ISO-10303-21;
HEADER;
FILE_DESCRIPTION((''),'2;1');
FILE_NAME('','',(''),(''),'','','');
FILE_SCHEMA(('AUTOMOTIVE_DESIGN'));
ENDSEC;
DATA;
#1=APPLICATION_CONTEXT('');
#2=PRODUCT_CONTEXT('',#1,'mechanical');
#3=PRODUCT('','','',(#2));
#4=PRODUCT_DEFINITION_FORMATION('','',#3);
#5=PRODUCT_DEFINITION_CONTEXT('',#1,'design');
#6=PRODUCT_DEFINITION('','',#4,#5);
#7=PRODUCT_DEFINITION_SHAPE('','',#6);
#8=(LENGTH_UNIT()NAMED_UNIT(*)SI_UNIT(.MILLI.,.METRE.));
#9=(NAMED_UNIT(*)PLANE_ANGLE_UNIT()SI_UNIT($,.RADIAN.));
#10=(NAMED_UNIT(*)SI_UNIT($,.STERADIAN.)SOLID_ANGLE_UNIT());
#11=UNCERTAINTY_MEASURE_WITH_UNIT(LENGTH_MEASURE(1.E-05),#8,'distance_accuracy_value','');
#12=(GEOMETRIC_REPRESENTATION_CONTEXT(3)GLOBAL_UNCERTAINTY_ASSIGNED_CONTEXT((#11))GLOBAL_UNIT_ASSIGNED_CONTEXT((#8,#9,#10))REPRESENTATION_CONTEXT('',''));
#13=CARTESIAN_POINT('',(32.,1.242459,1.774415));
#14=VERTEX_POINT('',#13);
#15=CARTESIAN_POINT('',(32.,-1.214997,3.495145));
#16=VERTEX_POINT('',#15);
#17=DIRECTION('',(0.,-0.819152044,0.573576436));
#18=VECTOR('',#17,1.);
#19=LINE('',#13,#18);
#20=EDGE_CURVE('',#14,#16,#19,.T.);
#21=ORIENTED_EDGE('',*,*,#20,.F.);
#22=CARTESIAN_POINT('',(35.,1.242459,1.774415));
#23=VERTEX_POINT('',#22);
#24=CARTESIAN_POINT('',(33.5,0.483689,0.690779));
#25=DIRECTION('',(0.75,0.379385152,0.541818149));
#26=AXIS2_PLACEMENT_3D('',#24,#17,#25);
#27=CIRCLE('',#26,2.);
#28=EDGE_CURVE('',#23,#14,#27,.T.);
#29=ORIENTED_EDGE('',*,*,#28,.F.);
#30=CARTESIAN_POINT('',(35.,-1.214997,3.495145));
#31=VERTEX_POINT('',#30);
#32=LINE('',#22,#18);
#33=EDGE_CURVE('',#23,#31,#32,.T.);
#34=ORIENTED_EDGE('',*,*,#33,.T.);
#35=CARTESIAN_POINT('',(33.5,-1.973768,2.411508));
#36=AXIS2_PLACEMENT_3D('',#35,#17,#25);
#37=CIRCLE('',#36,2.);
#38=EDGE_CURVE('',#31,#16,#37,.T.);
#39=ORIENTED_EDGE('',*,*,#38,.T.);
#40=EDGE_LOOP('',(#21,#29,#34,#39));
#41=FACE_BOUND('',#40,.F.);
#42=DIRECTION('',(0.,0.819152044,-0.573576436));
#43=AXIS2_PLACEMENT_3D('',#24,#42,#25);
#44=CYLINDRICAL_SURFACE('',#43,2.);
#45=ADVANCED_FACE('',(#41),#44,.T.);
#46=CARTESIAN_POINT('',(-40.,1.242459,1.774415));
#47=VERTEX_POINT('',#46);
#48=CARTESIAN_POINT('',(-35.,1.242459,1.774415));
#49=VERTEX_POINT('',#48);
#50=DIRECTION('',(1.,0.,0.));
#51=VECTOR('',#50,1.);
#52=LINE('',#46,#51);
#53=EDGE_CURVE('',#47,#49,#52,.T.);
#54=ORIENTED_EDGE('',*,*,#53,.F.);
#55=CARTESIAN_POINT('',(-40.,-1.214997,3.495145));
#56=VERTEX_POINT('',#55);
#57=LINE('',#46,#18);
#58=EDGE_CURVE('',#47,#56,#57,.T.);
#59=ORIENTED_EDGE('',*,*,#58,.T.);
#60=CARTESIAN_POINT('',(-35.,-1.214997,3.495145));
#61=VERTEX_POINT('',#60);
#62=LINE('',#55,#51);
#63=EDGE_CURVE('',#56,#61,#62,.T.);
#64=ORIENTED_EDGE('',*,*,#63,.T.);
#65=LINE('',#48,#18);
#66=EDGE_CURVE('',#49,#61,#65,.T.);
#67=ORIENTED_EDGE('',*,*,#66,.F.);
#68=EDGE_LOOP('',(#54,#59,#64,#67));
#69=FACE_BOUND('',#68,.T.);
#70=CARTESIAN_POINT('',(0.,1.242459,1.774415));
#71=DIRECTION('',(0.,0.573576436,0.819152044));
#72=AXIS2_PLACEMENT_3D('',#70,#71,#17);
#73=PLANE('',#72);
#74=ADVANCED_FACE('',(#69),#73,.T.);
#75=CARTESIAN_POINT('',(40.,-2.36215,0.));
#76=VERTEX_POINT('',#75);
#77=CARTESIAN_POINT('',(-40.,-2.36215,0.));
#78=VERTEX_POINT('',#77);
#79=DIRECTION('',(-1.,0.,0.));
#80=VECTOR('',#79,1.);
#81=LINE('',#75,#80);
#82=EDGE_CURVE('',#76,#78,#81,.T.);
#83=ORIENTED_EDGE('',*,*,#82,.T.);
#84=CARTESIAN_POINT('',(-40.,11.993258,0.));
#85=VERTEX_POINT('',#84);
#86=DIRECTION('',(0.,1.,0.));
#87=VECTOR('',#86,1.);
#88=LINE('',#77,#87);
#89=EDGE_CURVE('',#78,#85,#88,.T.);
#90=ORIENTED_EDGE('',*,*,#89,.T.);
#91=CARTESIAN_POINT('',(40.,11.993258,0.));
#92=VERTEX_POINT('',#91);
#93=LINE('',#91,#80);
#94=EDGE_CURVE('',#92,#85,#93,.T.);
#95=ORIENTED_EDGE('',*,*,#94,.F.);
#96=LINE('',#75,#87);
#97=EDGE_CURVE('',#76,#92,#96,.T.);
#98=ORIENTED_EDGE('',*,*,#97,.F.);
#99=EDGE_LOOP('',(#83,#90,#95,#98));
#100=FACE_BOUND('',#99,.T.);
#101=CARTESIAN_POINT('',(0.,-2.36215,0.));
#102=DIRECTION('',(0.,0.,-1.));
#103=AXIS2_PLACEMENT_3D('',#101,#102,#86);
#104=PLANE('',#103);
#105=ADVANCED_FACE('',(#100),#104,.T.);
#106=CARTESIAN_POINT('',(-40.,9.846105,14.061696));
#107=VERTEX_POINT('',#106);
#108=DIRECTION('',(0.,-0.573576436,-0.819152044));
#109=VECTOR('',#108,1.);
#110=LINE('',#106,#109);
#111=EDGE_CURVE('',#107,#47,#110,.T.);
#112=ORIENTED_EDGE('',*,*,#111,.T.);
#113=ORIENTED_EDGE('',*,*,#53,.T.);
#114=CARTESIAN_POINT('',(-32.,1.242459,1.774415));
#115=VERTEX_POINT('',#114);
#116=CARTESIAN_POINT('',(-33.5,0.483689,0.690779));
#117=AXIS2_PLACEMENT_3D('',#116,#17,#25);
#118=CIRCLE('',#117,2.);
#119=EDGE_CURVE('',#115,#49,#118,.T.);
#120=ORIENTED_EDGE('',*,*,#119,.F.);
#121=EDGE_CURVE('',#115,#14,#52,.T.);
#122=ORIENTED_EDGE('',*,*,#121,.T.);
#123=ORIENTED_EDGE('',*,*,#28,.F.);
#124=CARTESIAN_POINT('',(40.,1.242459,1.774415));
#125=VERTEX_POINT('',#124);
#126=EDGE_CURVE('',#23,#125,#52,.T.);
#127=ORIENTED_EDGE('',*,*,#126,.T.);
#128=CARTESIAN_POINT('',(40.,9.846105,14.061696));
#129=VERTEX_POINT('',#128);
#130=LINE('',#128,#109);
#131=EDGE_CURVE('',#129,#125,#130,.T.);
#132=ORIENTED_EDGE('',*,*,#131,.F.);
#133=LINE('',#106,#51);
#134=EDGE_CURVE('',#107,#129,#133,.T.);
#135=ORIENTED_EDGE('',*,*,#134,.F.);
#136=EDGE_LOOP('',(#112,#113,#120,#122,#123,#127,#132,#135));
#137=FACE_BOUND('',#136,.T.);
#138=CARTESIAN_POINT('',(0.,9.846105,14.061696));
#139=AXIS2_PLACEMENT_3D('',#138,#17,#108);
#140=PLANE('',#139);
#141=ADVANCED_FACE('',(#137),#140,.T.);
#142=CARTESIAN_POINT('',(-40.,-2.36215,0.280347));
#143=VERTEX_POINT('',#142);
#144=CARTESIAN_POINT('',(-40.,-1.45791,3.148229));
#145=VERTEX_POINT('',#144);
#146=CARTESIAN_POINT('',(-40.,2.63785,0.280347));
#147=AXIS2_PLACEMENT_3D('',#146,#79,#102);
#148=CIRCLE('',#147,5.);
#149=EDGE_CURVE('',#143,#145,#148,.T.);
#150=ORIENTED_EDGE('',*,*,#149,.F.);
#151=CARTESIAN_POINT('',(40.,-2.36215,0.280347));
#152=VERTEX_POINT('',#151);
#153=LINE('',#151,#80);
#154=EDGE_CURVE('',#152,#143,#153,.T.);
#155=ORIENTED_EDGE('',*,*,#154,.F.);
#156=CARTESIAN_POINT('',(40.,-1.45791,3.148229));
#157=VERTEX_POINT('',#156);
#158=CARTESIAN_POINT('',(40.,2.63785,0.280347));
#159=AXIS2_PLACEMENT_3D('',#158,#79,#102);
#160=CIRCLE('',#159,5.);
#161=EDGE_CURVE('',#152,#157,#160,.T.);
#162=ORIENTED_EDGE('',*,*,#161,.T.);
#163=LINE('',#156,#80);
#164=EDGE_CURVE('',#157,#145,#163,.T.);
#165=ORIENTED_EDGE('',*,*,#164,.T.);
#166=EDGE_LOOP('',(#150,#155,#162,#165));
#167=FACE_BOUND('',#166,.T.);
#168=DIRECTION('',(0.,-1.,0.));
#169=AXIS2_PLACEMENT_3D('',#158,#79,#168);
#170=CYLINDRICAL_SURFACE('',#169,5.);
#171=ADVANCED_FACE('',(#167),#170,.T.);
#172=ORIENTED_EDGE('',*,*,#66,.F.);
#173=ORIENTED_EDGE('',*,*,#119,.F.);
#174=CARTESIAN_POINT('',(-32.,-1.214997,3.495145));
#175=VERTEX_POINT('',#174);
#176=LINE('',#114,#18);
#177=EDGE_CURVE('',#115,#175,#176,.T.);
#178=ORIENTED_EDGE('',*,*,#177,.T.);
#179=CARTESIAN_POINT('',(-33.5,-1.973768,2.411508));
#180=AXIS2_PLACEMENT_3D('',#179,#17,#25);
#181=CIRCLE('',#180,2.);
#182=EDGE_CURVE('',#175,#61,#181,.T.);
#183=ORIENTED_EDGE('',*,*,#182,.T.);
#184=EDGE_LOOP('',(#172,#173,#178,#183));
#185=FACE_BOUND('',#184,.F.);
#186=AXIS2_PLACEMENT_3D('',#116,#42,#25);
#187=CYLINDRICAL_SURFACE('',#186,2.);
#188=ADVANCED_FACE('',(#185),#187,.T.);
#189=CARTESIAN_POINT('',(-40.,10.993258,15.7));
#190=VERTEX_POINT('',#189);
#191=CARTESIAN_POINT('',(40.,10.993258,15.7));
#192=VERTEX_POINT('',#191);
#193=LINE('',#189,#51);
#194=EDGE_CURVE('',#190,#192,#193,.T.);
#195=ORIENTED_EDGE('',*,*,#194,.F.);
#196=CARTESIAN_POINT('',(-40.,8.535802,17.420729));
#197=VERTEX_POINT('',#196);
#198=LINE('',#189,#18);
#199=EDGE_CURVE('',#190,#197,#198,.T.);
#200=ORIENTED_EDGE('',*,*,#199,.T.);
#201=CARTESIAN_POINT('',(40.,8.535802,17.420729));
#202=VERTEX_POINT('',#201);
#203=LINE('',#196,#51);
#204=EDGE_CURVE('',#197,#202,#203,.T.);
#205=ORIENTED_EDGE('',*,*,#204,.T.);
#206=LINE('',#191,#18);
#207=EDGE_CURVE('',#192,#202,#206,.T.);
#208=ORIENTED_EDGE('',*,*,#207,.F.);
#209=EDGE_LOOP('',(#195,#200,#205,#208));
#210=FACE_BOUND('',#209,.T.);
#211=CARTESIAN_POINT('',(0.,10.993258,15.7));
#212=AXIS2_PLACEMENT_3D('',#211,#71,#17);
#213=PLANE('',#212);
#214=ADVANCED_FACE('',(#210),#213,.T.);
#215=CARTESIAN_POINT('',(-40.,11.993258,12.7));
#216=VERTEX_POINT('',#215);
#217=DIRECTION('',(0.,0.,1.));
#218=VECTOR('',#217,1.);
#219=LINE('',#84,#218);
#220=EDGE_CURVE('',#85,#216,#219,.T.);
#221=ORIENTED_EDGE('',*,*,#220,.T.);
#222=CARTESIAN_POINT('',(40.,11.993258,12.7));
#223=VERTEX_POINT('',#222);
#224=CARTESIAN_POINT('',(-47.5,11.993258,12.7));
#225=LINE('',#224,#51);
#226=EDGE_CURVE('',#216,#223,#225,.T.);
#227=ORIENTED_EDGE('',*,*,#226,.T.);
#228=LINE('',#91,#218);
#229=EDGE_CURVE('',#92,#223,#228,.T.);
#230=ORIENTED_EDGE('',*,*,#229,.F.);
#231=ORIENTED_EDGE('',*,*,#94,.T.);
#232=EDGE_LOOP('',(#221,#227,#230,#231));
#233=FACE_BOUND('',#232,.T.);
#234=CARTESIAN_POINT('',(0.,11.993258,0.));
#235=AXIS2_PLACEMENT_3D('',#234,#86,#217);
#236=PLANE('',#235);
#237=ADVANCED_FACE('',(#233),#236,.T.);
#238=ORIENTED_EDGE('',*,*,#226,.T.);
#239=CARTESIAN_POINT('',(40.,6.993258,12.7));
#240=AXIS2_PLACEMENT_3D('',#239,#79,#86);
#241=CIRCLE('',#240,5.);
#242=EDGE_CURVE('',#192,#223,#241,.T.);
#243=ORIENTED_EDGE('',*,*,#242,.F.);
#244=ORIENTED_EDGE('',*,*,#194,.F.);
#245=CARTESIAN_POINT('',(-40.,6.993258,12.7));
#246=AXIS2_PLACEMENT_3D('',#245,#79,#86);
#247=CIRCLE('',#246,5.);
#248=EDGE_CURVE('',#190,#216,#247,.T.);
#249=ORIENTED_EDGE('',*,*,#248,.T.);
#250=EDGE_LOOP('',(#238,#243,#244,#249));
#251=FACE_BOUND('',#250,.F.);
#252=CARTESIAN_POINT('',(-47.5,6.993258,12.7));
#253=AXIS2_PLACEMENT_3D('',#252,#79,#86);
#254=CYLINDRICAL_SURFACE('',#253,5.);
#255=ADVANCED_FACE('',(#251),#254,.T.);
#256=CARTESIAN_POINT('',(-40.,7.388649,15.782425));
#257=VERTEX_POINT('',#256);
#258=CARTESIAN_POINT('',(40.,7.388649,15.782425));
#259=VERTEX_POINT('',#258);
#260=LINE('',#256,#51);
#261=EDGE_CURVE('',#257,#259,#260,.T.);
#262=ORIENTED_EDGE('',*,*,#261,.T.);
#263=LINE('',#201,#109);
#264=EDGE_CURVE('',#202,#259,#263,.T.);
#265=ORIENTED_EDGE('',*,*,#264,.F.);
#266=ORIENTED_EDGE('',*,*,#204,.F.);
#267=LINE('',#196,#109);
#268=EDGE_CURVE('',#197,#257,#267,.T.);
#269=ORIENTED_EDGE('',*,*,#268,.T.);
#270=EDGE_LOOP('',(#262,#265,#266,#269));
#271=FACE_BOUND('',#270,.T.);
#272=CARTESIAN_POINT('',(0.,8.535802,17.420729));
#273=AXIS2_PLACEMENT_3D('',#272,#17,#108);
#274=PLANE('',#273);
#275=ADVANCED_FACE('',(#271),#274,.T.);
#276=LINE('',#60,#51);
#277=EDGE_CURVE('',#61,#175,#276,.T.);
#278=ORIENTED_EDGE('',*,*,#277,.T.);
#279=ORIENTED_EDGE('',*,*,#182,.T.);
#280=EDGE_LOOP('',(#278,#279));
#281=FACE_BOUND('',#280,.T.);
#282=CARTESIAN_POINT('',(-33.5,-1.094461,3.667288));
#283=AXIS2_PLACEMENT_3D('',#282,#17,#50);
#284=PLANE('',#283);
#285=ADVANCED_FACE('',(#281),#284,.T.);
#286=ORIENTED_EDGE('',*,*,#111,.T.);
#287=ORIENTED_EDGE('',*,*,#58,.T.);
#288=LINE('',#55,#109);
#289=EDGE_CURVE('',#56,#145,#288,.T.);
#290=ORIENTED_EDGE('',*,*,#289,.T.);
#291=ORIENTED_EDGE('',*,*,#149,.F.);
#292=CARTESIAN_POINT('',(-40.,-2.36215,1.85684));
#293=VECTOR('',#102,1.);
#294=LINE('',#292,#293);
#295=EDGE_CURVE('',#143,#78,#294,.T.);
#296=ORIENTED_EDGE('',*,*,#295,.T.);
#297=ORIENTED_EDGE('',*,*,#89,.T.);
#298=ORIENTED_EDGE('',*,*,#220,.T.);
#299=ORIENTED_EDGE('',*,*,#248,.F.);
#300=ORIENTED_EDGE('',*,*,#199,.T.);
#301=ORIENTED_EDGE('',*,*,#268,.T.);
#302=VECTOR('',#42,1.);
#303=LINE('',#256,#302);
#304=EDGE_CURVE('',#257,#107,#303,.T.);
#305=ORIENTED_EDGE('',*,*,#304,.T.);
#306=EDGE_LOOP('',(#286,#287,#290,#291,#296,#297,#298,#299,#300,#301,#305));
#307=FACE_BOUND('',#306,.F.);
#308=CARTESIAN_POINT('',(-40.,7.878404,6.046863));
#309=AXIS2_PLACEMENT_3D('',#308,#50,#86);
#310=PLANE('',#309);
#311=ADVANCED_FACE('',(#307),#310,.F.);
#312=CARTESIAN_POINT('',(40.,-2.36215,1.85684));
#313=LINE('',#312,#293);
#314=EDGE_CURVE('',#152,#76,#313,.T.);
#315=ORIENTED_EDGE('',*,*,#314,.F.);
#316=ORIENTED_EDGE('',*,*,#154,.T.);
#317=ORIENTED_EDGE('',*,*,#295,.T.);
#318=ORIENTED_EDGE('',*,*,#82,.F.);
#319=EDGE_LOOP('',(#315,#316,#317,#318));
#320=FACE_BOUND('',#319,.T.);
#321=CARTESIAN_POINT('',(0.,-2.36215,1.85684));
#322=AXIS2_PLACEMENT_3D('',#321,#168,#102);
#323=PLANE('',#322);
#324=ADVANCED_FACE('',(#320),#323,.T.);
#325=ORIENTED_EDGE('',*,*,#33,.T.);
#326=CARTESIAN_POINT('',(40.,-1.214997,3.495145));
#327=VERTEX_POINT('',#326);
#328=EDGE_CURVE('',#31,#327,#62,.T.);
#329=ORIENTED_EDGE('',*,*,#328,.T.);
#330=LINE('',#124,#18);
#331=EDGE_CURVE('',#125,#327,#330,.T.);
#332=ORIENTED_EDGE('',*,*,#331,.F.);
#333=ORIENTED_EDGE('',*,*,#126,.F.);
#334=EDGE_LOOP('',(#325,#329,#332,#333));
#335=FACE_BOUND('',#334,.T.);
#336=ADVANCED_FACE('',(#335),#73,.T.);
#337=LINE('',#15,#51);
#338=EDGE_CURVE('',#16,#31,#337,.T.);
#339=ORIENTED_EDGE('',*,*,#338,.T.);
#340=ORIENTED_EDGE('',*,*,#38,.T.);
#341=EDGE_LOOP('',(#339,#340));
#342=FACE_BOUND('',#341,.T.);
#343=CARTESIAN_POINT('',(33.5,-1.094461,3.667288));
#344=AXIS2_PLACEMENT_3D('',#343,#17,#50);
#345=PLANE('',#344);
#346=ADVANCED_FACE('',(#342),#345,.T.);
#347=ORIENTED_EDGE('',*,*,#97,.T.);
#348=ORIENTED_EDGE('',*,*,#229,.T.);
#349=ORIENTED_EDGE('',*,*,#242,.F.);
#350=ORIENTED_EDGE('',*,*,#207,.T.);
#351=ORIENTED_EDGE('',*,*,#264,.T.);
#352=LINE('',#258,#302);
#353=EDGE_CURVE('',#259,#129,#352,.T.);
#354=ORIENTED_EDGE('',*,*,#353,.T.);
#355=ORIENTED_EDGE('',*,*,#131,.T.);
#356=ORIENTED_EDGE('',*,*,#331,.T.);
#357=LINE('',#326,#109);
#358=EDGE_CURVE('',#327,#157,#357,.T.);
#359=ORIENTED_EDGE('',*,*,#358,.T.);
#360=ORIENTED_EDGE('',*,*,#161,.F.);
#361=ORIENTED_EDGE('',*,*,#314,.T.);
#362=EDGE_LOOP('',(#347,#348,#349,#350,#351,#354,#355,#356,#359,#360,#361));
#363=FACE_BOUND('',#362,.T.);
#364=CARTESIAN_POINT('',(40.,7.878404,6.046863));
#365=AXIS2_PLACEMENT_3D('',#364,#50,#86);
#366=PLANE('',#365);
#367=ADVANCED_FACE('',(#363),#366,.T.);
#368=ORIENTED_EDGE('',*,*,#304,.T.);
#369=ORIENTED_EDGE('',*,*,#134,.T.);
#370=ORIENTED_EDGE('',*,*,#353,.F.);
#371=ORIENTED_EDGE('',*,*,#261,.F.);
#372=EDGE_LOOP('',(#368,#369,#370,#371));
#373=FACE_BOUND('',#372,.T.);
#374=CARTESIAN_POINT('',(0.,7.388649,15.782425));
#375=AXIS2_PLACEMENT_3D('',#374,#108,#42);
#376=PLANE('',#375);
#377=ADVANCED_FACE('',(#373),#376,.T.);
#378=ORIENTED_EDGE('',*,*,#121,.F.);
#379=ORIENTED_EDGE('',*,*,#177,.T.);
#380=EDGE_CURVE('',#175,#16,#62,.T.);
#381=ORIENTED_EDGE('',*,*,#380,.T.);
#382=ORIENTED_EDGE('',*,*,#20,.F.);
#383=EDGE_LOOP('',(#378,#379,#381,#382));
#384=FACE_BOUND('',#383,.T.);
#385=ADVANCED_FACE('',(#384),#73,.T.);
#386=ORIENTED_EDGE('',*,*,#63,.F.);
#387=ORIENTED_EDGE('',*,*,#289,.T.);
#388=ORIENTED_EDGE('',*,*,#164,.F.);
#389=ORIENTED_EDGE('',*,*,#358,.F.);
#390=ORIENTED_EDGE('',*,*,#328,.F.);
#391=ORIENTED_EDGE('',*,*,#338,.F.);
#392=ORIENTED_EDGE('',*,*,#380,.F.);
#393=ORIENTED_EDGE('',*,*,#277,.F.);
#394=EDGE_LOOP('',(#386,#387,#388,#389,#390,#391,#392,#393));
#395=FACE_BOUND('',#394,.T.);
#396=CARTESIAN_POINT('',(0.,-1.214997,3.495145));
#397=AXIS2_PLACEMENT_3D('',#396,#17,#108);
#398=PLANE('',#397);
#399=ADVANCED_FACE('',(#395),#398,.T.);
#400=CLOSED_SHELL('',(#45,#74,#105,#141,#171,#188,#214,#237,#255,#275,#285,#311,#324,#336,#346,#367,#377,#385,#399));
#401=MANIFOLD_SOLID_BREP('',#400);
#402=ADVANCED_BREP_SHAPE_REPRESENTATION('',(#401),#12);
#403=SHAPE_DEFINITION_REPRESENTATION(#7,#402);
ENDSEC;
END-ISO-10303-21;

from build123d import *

# Parameters (mm, degrees)
F1_DEPTH    = 40
F2_R        = 5
F3_T1_DEPTH = 95
F5_DEPTH    = 3


# Not quite as in the source:
# - a fillet or chamfer that OpenCascade refuses, or shapes differently, is made with other operations: its cross-section is extruded or revolved along the edge and cut away or added


with BuildPart() as f1:
    # F0 (on Right) → F1 (new body, symmetric)
    with BuildSketch(Plane.YZ):
        Polygon((0.0953060592, 0.1361111585), (0, 0), (11.9932583499, 0), (11.9932583499, 15.7), (10.9932583499, 15.7), (9.8461054772, 14.0616959114), (1.2424589319, 1.7744152471), align=None)
        Polygon((7.3886493443, 15.7824252205), (9.8461054772, 14.0616959114), (10.9932583499, 15.7), (8.535802217, 17.4207293091), align=None)
        Polygon((-2.3621500736, 1.8568404676), (0.0953060592, 0.1361111585), (1.2424589319, 1.7744152471), (-1.2149972009, 3.4951445561), align=None)
        Polygon((-2.3621500736, 0), (0, 0), (0.0953060592, 0.1361111585), (-2.3621500736, 1.8568404676), align=None)
    extrude(amount=F1_DEPTH, both=True)

    # F2
    f2_edges = [f1.edges().sort_by_distance(p)[0] for p in [
        (0, -2.36215, 1.85684),
    ]]
    fillet(f2_edges, radius=F2_R)

    # F3: fillet of radius 5 on 1 edges, made by hand

    # F3_s2 → F3_t1 (cut)
    with BuildSketch(Plane.YZ.offset(-47.5)):
        with BuildLine():
            ThreePointArc((11.9932583499, 12.7), (11.7366748401, 14.2811388301), (10.9932583499, 15.7))
            Line((10.9932583499, 15.7), (11.9932583499, 15.7))
            Line((11.9932583499, 15.7), (11.9932583499, 12.7))
        make_face()
    extrude(amount=F3_T1_DEPTH, mode=Mode.SUBTRACT)

    # F4 (on face) → F5 (join)
    with BuildSketch(Plane(origin=(0, 0, 0), x_dir=(1, 0, 0), z_dir=(0, -0.8191520443, 0.5735764364))):
        with BuildLine():
            Line((-35, 2.1661610436), (-32, 2.1661610436))
            ThreePointArc((-32, 2.1661610436), (-33.5, 2.843285388), (-35, 2.1661610436))
        make_face()
        with BuildLine():
            ThreePointArc((35, 2.1661610436), (33.5, 2.843285388), (32, 2.1661610436))
            Line((32, 2.1661610436), (35, 2.1661610436))
        make_face()
    extrude(amount=F5_DEPTH)


solid = f1.part
